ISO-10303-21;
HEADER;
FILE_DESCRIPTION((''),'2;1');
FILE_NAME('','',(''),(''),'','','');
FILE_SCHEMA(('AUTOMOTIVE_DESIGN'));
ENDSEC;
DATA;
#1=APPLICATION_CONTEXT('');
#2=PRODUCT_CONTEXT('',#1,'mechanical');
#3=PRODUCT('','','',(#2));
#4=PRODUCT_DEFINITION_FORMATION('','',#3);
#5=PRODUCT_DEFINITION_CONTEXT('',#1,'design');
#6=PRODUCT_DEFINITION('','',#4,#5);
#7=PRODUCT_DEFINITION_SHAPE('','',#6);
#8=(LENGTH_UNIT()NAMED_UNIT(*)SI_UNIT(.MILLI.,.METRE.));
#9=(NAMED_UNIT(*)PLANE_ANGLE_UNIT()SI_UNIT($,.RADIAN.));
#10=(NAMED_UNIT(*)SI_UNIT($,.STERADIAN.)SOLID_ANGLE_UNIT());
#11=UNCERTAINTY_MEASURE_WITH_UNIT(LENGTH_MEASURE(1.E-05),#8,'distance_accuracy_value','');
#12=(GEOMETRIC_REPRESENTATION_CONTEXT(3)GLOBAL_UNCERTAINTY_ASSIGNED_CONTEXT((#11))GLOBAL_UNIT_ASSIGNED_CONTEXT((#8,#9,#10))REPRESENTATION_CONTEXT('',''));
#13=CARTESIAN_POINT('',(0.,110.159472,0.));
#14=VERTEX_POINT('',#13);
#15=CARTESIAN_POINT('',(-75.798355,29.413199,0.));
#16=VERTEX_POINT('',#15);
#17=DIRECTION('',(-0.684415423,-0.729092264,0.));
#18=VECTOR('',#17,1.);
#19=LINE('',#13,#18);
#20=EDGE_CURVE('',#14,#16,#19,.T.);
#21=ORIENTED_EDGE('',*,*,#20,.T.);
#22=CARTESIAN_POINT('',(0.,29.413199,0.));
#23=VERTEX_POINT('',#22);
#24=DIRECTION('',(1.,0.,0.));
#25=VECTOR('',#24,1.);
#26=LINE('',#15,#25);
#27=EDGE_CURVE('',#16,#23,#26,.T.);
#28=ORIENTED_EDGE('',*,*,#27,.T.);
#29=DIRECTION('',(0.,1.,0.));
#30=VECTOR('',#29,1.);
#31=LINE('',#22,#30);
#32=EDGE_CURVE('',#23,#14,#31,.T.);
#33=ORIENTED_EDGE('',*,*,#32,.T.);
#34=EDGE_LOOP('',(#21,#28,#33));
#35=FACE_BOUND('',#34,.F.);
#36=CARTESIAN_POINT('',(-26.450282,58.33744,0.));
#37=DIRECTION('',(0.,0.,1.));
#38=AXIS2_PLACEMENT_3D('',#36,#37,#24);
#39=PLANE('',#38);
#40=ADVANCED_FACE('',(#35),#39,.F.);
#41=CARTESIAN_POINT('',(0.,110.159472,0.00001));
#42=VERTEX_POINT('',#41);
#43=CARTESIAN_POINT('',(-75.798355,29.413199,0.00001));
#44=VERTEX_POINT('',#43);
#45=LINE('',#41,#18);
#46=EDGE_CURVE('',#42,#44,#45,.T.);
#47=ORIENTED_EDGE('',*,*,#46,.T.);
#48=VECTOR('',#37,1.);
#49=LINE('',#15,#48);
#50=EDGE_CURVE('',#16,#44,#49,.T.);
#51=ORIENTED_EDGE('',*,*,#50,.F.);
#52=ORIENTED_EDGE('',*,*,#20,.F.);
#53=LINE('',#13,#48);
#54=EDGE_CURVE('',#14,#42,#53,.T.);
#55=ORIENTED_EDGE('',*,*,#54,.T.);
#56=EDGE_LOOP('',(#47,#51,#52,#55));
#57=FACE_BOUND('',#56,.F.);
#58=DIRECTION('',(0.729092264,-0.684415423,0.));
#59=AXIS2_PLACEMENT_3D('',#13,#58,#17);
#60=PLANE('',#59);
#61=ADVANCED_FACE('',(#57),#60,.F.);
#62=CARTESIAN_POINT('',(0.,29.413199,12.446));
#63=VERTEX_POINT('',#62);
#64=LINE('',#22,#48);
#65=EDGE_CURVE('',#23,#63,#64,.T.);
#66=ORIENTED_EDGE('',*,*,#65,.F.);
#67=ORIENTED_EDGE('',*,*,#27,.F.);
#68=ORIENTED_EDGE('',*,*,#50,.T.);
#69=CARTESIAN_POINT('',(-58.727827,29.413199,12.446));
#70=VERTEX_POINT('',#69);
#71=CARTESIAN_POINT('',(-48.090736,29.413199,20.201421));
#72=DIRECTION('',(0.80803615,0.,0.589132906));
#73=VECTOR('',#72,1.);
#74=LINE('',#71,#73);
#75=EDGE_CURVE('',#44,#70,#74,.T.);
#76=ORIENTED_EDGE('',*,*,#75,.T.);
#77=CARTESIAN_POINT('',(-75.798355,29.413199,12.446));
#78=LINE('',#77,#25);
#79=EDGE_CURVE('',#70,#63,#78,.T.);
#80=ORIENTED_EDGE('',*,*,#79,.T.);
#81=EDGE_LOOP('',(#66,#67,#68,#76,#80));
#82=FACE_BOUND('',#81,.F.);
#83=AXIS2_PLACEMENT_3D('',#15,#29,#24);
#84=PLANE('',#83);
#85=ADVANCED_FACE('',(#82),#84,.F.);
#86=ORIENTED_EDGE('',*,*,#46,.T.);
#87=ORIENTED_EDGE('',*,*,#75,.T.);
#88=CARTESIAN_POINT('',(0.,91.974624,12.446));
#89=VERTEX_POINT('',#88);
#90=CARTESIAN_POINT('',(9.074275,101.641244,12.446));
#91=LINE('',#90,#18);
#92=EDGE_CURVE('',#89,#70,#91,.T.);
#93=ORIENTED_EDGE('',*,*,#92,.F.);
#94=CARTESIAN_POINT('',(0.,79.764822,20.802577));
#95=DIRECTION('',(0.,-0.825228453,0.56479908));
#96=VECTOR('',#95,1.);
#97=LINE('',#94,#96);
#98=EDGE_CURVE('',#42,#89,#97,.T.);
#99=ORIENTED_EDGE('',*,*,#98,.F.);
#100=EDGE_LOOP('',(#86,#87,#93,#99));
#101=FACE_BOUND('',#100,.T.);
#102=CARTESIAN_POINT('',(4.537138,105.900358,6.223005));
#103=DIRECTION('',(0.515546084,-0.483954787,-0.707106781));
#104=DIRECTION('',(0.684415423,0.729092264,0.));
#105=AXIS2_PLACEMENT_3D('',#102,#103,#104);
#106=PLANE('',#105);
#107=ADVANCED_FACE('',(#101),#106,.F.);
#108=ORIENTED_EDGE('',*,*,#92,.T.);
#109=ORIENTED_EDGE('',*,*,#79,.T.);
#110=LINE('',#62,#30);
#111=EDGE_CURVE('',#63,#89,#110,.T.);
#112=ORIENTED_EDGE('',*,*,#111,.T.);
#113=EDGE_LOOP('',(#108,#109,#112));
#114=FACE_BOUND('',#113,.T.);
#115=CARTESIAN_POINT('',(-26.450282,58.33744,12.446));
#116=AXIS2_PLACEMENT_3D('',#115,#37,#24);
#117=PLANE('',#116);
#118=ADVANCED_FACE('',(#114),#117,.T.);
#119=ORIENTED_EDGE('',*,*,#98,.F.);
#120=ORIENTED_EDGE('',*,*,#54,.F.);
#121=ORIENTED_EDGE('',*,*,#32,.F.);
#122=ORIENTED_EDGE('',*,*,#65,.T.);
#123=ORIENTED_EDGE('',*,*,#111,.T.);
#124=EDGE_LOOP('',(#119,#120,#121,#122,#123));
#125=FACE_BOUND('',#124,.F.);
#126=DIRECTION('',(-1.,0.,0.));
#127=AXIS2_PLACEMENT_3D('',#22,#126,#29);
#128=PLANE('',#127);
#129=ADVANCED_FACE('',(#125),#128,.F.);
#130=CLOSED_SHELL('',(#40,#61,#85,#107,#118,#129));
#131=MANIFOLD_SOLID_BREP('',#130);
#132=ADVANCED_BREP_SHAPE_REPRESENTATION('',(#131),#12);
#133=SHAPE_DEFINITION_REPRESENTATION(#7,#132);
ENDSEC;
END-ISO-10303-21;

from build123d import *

# Parameters (mm, degrees)
F2_DEPTH = 12.446
F3_SIZE  = 12.44599


# Not quite as in the source:
# - a fillet or chamfer is up to 0.001 mm smaller than in the source, because OpenCascade refuses the exact size


with BuildPart() as f2:
    # F1 (on face) → F2 (new body)
    with BuildSketch(Plane.XY):
        Polygon((-75.7983550429, 29.4131990522), (0, 29.4131990522), (0, 110.1594716311), align=None)
    extrude(amount=F2_DEPTH)

    # F3 (size 12.446 in the source; OpenCascade refuses exactly that, so slightly less here)
    f3_edges = [f2.edges().sort_by_distance(p)[0] for p in [
        (-37.899178, 69.786335, 12.446),
    ]]
    chamfer(f3_edges, length=F3_SIZE)


solid = f2.part
